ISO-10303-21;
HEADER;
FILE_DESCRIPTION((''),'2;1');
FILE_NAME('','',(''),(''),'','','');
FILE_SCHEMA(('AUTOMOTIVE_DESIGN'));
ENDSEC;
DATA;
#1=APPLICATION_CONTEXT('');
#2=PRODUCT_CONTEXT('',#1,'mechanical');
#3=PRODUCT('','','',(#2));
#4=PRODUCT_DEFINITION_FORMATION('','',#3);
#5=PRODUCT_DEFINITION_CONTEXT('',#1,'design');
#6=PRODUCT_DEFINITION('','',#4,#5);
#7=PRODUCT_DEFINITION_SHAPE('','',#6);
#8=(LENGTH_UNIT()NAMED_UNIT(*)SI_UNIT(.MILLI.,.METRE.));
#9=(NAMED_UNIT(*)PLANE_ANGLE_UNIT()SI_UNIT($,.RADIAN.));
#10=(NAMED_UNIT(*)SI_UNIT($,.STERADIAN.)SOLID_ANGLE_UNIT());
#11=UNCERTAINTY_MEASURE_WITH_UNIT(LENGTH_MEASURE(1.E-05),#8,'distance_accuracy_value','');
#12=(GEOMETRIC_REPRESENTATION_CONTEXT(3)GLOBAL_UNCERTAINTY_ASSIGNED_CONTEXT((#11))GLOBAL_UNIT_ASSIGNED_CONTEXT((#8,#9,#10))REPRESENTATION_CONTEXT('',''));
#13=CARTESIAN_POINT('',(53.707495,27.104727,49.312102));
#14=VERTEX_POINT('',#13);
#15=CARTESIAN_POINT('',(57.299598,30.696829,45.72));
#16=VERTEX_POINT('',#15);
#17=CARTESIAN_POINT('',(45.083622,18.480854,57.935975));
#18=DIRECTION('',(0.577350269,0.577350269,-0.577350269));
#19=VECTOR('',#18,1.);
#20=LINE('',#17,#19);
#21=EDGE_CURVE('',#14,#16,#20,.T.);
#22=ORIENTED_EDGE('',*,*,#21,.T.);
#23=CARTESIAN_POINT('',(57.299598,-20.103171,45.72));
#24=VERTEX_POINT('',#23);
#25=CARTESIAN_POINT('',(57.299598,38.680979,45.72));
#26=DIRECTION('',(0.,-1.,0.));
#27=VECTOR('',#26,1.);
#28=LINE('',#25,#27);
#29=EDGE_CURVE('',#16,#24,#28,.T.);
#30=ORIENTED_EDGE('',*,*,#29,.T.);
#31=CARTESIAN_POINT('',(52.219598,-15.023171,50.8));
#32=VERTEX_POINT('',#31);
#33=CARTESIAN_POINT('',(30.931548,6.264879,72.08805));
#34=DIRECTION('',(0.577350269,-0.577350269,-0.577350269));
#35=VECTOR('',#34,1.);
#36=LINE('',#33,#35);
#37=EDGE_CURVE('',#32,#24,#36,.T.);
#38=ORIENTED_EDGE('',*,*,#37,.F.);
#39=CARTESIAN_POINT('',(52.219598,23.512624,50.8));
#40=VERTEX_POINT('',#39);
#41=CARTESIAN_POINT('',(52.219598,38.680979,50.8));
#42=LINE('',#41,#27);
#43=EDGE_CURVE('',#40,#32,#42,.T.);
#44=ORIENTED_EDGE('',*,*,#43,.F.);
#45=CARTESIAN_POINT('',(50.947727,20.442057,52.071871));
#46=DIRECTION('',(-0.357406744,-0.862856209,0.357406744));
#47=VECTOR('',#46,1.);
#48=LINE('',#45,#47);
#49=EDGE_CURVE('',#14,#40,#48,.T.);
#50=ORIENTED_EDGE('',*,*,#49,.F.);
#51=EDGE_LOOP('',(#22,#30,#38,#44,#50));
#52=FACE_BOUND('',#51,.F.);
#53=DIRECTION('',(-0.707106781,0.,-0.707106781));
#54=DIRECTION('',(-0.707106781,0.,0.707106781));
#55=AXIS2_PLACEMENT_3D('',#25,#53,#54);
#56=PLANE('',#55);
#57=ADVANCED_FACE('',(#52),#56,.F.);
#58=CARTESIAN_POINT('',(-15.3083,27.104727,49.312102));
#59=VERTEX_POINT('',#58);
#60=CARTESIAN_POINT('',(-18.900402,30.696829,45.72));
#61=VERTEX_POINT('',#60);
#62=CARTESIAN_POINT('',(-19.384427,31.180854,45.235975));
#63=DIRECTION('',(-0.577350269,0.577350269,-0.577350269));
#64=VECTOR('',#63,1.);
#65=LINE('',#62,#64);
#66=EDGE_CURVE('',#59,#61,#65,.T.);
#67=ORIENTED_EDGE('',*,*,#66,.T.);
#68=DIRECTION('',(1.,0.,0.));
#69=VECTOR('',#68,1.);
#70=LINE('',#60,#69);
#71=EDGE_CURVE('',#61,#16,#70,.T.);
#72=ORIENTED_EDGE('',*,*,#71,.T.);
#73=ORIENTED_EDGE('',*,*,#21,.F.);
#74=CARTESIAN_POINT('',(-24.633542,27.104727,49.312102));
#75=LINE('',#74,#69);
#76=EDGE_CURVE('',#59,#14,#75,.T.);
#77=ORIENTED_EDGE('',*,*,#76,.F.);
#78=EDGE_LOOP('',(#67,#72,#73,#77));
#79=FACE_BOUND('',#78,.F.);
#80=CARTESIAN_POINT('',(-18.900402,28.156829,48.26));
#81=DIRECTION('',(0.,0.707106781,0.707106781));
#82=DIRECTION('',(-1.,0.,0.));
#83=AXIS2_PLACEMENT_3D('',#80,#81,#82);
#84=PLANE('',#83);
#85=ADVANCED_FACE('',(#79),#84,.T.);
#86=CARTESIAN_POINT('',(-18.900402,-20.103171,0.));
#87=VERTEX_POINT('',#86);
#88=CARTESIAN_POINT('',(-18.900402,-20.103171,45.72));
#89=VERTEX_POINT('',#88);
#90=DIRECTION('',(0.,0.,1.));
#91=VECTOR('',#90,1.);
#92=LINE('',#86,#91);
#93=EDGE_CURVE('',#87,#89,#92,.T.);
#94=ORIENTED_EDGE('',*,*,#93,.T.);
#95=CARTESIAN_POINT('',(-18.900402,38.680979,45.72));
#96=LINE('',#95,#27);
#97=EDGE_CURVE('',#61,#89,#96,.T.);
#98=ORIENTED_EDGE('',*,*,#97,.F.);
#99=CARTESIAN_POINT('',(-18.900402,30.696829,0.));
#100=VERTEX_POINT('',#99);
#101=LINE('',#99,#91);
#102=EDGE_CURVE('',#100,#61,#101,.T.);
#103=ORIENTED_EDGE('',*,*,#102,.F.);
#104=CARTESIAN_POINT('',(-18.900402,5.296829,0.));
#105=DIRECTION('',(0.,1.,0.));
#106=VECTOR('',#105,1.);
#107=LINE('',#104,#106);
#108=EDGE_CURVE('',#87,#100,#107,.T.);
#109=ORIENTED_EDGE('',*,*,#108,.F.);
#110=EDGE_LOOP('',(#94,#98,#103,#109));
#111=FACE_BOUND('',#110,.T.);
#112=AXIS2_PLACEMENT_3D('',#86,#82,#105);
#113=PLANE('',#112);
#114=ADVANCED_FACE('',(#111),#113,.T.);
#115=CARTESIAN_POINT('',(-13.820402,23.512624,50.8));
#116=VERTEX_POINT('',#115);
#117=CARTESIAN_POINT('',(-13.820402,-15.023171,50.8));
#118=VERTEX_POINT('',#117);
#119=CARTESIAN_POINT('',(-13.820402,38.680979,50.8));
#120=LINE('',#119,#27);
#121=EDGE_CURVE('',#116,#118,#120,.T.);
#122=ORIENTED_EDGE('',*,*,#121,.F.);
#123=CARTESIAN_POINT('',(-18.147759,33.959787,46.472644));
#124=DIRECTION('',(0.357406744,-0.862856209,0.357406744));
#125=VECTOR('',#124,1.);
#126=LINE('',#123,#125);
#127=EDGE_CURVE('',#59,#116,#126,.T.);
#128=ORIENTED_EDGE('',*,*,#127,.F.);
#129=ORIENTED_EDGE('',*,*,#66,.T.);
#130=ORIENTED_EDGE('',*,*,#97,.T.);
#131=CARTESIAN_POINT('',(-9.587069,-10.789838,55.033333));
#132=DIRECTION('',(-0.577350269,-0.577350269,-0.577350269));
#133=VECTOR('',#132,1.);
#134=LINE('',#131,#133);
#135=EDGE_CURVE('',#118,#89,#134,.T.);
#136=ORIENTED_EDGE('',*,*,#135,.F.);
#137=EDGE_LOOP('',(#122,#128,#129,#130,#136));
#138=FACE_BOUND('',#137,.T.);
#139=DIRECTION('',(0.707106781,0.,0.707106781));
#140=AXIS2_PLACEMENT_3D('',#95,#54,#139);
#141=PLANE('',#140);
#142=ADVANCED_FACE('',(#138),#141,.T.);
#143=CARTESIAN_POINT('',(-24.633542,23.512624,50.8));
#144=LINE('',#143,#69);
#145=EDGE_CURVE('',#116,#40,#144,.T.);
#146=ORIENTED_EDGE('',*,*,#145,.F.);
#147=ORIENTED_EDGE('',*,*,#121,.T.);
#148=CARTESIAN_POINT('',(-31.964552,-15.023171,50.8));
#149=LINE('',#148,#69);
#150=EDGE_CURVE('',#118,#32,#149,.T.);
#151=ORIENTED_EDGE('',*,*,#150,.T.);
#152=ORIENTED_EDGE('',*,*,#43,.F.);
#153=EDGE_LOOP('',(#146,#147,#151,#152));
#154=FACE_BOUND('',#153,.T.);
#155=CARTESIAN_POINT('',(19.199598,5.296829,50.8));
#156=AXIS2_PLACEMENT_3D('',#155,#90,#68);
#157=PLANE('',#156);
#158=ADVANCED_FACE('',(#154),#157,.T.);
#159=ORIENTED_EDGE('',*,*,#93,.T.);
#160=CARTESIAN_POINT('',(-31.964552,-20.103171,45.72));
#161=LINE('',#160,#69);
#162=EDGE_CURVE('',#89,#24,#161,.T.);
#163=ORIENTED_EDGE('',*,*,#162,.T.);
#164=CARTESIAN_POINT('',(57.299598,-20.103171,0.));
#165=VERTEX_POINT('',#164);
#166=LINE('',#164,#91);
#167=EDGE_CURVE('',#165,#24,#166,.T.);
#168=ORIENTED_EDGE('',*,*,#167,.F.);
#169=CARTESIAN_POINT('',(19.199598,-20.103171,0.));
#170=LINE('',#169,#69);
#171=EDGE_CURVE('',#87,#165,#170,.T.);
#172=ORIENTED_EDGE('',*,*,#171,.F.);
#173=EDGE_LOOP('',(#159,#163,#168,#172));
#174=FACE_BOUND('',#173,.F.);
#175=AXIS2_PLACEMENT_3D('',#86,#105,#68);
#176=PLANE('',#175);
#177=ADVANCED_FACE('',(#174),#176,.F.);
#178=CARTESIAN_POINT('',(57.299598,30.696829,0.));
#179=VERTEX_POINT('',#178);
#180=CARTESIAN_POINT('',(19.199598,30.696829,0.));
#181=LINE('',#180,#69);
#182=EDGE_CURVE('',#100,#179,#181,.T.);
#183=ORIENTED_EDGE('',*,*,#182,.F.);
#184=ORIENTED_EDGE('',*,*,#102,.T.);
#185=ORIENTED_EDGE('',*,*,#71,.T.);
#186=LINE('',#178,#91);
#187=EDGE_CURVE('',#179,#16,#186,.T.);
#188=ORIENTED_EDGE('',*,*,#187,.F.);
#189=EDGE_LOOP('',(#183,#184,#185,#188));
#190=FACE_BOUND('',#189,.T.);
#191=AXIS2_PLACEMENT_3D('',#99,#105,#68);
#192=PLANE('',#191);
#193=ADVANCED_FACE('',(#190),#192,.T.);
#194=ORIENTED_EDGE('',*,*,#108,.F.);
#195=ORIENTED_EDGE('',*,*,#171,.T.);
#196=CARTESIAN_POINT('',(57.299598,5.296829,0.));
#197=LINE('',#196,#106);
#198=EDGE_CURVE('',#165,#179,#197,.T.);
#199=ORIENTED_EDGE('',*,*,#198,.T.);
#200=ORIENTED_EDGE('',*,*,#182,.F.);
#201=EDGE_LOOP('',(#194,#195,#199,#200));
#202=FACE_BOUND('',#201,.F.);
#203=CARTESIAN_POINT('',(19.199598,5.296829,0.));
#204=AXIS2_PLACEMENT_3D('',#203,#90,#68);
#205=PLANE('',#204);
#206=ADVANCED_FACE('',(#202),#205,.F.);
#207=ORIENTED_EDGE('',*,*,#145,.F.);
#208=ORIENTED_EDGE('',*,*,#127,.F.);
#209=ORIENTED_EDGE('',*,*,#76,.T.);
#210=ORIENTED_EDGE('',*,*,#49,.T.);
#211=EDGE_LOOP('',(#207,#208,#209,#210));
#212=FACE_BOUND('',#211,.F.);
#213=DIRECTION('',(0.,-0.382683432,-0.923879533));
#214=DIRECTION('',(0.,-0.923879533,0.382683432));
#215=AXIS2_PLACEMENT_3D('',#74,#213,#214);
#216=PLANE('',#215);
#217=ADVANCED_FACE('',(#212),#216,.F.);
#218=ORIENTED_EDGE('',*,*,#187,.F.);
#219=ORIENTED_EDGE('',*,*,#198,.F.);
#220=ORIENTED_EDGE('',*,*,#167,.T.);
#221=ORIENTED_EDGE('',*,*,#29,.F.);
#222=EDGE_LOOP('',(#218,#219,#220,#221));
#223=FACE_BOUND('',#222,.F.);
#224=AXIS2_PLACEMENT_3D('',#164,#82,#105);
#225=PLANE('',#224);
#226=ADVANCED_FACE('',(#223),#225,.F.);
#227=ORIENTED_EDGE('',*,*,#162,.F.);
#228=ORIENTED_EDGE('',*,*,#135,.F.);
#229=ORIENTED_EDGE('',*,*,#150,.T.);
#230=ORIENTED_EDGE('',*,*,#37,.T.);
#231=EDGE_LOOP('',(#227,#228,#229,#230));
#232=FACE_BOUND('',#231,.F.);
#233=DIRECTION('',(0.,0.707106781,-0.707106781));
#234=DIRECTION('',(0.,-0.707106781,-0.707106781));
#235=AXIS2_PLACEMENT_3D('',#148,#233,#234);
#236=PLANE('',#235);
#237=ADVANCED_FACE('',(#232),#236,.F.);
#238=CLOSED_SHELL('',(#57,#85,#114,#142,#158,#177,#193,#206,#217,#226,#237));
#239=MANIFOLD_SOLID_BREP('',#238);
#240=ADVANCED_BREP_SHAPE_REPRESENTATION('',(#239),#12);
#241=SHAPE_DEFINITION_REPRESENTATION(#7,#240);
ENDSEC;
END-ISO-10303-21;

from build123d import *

# Parameters (mm, degrees)
F0_W        = 76.2
F0_H        = 50.8
F1_DEPTH    = 50.8
F2_SIZE     = 5.08
F3_T1_DEPTH = 71.8482991577
F3_T3_DEPTH = 87.6662799398
F3_T5_DEPTH = 102.3282991577


# Not quite as in the source:
# - a fillet or chamfer that OpenCascade refuses, or shapes differently, is made with other operations: its cross-section is extruded or revolved along the edge and cut away or added


with BuildPart() as f1:
    # F0 (on Top) → F1 (new body)
    with BuildSketch(Plane.XY):
        with Locations((19.1995975337, 5.2968291566)):
            Rectangle(F0_W, F0_H)
    extrude(amount=F1_DEPTH)

    # F2
    f2_edges = [f1.edges().sort_by_distance(p)[0] for p in [
        (19.199598, 30.696829, 50.8),
    ]]
    chamfer(f2_edges, length=F2_SIZE)

    # F3: chamfer of 5.08 on 4 edges, made by hand

    # F3_s2 → F3_t1 (cut)
    with BuildSketch(Plane.XZ.offset(-38.6809787354)):
        Polygon((-18.9004024663, 45.72), (-13.8204024663, 50.8), (-18.9004024663, 50.8), align=None)
        Polygon((57.2995975337, 45.72), (52.2195975337, 50.8), (57.2995975337, 50.8), align=None)
    extrude(amount=F3_T1_DEPTH, mode=Mode.SUBTRACT)

    # F3_s4 → F3_t3 (cut)
    with BuildSketch(Plane.YZ.offset(-24.6335424362)):
        Polygon((27.1047267081, 49.3121024484), (23.5126242597, 50.8), (25.6168291566, 50.8), align=None)
    extrude(amount=F3_T3_DEPTH, mode=Mode.SUBTRACT)

    # F3_s6 → F3_t5 (cut)
    with BuildSketch(Plane.YZ.offset(-31.9645520452)):
        Polygon((-15.0231708434, 50.8), (-20.1031708434, 45.72), (-20.1031708434, 50.8), align=None)
    extrude(amount=F3_T5_DEPTH, mode=Mode.SUBTRACT)


solid = f1.part
